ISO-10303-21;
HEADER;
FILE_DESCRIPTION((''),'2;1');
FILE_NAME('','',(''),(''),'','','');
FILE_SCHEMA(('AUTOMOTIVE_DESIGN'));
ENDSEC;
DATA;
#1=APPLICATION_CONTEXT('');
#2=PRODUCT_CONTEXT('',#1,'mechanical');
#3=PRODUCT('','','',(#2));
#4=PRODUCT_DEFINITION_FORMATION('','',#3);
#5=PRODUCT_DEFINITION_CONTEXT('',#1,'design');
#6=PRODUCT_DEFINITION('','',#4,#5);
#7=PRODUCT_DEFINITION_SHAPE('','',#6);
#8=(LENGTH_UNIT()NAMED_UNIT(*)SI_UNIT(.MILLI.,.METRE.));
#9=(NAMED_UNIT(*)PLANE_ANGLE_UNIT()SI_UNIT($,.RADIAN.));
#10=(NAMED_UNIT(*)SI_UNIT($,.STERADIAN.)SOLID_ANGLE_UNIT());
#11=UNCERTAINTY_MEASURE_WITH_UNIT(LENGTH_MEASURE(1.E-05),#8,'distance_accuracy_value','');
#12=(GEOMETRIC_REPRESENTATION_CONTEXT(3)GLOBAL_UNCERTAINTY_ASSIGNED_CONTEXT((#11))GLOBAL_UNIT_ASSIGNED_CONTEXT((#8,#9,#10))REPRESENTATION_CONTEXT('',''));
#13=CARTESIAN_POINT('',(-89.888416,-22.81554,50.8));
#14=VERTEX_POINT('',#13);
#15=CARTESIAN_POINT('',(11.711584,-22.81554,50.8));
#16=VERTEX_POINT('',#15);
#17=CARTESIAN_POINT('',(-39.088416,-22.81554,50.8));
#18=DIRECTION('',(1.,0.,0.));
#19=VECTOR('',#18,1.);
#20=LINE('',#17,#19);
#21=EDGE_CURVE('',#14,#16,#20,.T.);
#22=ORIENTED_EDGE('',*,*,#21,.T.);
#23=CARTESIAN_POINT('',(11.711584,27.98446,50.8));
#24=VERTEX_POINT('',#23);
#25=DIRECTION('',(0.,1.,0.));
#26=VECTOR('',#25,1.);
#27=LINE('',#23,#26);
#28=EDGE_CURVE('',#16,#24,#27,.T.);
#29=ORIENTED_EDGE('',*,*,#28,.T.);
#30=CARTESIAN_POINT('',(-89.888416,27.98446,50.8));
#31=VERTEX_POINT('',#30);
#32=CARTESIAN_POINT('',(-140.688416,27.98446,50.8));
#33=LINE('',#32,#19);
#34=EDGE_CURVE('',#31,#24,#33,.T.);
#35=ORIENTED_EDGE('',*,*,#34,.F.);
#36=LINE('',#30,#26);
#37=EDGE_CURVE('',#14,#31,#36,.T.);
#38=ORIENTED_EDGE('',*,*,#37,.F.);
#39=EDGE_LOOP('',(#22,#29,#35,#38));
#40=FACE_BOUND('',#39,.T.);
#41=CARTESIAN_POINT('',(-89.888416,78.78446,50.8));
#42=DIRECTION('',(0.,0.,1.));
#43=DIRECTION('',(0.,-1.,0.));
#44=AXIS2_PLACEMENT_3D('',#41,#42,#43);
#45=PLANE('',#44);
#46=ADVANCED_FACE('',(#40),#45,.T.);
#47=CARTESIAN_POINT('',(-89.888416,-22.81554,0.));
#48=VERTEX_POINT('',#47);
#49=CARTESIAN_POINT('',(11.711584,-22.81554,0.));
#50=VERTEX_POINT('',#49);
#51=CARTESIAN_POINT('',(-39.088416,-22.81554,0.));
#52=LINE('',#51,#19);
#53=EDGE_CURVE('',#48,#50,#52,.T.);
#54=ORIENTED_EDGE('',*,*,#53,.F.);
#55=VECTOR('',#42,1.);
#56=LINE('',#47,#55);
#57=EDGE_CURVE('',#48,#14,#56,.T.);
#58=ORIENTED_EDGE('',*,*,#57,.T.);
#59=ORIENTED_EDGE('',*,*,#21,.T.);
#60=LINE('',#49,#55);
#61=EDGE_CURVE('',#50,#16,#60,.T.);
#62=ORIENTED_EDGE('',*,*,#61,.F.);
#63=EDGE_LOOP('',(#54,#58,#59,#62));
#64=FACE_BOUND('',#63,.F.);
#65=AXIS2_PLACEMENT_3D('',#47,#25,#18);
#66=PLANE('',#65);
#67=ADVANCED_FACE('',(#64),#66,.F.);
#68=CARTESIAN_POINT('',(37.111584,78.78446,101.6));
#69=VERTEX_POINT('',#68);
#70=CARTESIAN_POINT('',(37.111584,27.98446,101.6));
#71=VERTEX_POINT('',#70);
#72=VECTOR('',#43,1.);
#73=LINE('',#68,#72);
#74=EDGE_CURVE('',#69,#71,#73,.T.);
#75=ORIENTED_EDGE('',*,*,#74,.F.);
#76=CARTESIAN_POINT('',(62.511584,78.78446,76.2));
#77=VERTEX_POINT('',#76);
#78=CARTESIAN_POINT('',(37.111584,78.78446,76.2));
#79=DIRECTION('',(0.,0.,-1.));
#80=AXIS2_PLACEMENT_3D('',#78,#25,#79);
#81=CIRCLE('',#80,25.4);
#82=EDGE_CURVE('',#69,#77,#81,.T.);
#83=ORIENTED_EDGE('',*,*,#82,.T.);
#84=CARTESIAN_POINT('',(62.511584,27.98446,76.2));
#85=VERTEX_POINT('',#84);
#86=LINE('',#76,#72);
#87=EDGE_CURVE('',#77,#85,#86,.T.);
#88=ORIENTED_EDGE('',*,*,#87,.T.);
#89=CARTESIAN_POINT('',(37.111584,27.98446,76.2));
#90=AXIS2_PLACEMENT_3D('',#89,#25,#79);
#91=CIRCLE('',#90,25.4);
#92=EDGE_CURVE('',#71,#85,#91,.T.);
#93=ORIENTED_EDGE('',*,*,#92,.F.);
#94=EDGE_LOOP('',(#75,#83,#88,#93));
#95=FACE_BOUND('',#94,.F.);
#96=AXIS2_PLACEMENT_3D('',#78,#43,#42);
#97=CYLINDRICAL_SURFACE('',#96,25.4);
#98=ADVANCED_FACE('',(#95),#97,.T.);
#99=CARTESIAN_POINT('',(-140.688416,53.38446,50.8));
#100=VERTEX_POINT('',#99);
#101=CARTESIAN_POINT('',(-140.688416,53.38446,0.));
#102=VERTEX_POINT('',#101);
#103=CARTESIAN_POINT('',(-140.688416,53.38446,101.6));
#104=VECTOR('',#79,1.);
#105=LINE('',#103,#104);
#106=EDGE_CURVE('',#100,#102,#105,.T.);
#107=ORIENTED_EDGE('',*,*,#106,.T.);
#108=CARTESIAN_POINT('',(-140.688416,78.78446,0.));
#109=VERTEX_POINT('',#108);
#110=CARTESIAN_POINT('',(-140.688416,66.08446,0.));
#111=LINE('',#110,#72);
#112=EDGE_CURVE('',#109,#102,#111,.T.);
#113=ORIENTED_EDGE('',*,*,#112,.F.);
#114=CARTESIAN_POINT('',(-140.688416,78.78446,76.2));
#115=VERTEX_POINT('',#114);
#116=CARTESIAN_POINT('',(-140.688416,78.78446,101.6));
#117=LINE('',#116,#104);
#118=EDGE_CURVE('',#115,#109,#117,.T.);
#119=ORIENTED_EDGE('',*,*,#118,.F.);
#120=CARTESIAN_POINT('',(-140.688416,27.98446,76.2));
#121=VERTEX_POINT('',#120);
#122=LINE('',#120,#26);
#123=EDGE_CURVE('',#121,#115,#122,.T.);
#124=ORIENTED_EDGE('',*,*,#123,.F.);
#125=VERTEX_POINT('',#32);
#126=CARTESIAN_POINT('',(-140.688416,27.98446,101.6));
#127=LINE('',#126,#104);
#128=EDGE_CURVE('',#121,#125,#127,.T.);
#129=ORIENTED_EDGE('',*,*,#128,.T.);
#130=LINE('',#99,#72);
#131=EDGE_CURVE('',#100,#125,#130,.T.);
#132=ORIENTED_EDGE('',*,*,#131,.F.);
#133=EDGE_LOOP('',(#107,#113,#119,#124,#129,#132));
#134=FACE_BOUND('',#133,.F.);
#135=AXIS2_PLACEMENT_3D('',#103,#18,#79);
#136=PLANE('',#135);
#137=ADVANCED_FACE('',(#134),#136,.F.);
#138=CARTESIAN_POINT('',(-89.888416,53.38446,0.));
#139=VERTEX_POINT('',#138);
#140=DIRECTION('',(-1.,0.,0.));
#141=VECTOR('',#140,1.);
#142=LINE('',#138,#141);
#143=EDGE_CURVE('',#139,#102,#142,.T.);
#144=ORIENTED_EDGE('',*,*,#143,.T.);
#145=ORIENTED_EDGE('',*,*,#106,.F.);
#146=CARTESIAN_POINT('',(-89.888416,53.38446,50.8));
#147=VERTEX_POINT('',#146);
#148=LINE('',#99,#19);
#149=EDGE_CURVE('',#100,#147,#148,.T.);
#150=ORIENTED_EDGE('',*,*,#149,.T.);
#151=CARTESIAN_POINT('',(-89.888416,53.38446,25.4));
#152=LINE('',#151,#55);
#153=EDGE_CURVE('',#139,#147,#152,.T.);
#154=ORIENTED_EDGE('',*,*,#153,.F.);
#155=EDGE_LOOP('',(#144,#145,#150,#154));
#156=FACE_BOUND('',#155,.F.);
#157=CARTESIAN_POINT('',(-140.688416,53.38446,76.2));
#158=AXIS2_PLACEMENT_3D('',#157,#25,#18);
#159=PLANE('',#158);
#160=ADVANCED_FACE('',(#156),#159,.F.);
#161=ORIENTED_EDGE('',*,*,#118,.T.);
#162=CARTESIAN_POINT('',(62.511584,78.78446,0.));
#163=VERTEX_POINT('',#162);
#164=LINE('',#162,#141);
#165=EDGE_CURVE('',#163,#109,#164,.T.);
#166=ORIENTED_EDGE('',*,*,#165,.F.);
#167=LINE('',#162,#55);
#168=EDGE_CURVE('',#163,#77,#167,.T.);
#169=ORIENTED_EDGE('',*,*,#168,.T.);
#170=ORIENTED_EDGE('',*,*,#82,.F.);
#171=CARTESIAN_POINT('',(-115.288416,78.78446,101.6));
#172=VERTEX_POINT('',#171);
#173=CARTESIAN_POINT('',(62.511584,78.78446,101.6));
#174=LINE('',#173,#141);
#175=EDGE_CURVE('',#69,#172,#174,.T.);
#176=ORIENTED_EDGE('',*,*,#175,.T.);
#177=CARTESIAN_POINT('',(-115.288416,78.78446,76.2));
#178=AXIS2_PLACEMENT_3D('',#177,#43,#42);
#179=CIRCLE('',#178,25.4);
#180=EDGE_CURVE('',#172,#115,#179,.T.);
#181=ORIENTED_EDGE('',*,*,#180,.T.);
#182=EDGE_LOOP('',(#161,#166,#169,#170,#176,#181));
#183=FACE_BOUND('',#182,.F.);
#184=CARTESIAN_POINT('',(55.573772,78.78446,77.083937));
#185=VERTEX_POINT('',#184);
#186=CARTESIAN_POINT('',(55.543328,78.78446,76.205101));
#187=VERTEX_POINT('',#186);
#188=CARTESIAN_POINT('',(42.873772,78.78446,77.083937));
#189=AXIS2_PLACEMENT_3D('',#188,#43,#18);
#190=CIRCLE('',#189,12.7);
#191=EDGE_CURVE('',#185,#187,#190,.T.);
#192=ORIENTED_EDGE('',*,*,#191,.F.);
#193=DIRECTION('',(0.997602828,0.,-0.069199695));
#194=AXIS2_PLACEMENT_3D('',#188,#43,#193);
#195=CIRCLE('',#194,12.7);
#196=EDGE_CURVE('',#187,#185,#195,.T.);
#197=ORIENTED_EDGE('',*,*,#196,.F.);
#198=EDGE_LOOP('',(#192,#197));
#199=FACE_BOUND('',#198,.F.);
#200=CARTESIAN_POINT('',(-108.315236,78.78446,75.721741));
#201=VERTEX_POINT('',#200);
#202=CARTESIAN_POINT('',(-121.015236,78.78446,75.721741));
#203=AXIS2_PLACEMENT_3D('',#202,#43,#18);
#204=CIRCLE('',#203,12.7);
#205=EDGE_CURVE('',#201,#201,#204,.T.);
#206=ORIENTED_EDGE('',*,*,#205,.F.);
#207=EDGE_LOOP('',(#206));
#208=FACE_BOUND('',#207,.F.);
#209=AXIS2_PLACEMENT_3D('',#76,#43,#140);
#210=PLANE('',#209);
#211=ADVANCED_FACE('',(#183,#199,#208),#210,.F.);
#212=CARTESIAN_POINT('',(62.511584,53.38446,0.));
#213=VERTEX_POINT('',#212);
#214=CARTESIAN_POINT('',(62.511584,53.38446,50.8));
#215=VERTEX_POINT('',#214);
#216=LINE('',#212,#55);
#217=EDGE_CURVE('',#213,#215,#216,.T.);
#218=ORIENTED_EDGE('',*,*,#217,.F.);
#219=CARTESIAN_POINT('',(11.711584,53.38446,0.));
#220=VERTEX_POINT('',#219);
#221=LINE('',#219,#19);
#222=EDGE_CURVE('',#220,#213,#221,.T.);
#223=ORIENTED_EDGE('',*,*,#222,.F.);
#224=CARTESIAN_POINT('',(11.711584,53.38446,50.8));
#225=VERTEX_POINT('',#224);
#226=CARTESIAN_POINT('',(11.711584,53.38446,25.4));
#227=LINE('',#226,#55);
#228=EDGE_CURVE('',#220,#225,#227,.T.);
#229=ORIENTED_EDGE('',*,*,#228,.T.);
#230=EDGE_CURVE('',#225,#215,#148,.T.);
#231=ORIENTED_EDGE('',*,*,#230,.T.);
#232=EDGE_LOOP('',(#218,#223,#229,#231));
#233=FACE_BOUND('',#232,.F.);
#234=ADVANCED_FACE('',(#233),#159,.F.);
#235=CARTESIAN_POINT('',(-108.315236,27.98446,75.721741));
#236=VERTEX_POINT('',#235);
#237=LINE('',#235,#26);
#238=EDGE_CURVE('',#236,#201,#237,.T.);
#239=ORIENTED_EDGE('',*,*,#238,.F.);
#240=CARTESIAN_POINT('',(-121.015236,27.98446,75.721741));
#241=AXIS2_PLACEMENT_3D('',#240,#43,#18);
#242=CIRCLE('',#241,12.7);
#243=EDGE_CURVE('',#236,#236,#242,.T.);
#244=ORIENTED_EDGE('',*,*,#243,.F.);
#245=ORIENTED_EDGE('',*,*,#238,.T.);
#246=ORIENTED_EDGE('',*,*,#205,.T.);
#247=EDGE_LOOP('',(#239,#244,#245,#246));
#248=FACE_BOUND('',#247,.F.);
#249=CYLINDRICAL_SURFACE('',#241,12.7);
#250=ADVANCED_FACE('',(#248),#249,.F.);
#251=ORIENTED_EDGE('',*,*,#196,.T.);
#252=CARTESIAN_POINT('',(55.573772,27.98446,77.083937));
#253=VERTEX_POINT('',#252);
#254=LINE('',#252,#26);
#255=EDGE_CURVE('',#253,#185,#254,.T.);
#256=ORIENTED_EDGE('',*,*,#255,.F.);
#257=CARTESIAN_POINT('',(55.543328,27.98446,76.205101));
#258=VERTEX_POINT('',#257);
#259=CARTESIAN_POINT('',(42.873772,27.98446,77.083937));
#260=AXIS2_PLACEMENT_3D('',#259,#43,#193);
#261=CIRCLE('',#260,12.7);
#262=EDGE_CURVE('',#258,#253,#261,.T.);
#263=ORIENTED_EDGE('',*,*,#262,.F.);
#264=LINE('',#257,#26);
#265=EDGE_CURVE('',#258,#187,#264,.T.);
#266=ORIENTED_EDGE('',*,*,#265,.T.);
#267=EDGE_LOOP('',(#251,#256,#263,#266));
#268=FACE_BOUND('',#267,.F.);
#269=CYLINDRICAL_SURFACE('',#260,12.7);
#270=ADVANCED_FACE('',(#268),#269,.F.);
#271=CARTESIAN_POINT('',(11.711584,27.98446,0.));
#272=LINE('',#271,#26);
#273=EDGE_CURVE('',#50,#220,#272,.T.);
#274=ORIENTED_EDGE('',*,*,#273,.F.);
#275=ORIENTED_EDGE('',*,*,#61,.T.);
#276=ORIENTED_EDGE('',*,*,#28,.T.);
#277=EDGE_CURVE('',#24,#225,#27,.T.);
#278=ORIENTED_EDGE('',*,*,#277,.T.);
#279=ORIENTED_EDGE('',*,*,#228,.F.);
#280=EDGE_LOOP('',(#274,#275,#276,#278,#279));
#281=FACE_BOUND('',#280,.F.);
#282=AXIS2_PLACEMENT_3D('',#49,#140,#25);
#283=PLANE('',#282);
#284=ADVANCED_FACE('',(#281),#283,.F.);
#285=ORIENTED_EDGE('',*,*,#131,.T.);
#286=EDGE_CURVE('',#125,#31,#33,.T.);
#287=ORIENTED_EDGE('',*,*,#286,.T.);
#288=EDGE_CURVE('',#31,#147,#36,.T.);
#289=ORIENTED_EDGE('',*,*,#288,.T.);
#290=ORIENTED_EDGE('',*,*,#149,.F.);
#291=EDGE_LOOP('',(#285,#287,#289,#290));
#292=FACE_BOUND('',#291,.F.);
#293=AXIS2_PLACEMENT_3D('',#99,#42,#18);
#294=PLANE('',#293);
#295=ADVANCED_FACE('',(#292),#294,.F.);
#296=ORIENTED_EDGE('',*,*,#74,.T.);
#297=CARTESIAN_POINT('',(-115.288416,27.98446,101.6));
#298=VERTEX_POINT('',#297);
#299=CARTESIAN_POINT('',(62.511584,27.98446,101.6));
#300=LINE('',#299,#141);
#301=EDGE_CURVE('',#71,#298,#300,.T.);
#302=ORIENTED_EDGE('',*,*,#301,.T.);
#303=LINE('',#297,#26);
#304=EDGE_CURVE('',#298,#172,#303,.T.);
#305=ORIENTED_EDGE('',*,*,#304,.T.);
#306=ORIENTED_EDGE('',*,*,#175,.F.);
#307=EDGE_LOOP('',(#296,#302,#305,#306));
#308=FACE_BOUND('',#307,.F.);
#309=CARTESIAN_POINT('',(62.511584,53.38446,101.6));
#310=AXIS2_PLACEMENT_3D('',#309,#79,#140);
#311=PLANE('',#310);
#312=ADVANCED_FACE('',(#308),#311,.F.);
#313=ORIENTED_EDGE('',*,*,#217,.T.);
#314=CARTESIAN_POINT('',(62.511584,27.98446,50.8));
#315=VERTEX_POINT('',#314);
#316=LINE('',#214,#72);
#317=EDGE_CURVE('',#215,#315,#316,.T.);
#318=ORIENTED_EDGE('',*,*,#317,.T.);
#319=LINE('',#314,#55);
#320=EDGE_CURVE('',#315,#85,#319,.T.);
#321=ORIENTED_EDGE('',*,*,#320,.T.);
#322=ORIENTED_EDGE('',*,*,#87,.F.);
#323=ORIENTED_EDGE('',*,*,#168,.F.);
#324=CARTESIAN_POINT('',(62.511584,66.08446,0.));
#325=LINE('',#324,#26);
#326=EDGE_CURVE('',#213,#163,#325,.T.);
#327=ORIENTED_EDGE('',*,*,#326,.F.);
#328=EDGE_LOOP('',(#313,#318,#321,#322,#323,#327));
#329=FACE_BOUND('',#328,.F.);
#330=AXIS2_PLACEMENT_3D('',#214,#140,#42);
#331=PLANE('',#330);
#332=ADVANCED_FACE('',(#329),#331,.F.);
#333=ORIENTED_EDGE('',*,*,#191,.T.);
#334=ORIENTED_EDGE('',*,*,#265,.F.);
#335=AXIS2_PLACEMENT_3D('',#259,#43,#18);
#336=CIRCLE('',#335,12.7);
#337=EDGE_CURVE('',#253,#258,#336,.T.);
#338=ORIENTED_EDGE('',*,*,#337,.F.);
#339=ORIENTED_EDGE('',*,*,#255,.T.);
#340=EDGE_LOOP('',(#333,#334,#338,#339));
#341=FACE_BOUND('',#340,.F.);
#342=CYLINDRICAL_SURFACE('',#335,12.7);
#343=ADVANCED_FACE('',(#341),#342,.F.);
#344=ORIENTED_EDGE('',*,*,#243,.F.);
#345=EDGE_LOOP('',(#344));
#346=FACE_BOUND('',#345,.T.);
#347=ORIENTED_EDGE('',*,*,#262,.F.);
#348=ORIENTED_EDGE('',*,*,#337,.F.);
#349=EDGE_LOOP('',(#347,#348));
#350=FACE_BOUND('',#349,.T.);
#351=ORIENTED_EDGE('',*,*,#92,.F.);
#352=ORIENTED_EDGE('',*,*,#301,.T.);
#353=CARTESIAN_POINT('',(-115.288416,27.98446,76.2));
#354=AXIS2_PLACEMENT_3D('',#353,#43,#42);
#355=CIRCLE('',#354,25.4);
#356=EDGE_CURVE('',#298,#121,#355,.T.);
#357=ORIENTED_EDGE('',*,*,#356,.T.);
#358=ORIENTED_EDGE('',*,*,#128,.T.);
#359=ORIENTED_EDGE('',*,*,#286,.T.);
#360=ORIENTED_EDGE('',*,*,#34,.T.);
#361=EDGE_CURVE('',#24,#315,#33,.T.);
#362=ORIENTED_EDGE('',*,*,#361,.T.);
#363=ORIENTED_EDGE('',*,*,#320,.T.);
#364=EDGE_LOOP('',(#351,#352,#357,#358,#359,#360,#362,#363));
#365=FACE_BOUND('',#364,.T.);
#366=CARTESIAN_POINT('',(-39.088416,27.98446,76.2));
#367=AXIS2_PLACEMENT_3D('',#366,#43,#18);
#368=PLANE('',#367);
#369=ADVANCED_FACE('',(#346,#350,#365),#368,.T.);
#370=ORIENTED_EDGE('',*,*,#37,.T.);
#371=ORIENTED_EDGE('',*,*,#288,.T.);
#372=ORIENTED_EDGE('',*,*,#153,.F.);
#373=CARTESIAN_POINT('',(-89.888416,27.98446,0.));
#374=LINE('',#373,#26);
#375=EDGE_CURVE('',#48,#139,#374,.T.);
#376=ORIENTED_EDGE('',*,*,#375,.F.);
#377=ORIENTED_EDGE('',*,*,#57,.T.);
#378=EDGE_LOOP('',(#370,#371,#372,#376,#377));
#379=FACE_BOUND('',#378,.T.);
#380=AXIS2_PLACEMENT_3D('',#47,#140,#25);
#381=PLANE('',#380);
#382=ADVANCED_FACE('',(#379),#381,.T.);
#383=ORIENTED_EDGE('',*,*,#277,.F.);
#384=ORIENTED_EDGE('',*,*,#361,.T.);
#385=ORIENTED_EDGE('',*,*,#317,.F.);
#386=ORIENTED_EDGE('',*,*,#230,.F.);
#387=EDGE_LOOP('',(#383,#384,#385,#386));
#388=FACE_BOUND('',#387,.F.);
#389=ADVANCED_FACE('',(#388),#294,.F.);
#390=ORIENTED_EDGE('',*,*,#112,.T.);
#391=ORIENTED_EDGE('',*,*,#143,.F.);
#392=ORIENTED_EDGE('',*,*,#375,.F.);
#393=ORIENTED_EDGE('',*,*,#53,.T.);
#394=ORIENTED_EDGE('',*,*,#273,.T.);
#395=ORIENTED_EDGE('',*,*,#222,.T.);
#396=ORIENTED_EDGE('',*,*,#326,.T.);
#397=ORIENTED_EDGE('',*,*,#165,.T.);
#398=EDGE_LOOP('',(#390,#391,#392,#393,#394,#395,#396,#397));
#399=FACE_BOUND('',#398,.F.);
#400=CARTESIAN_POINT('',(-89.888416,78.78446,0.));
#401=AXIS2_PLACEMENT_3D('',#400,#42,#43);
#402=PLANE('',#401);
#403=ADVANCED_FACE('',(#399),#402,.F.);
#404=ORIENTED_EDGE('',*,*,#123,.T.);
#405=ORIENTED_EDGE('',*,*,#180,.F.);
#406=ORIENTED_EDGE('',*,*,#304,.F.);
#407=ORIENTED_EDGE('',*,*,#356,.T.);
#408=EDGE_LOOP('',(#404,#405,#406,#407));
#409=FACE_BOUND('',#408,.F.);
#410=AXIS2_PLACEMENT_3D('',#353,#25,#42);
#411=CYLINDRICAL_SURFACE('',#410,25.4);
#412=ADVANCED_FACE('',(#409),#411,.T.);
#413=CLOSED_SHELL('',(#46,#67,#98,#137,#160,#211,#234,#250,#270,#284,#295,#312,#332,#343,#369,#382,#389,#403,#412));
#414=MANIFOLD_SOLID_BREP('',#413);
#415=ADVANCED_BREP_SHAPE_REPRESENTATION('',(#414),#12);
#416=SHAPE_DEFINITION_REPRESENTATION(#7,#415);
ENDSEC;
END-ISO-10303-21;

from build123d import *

# Parameters (mm, degrees)
F0_W      = 101.6
F0_H      = 101.6
F1_DEPTH  = 50.8
F2_W      = 25.4
F2_H      = 50.8
F3_DEPTH  = 50.8
F4_W      = 25.4
F4_H      = 50.8
F5_DEPTH  = 50.8
F7_DEPTH  = 25.4
F8_DEPTH  = 25.4
F10_DEPTH = 25.4
F11_R     = 12.7
F12_DEPTH = 50.8
F14_DEPTH = 50.8
F15_R     = 25.4
F16_R     = 25.4


with BuildPart() as f1:
    # F0 (on Top) → F1 (new body)
    with BuildSketch(Plane.XY):
        with Locations((-39.0884162307, 27.9844595671)):
            Rectangle(F0_W, F0_H)
    extrude(amount=F1_DEPTH)

    # F2 (on face) → F3 (join)
    with BuildSketch(Plane.YZ.offset(11.7115837693)):
        with Locations((66.0844595671, 25.4)):
            Rectangle(F2_W, F2_H)
    extrude(amount=F3_DEPTH)

    # F4 (on face) → F5 (join)
    with BuildSketch(Plane(origin=(-89.8884162307, 0, 0), x_dir=(0, -1, 0), z_dir=(-1, 0, 0))):
        with Locations((-66.0844595671, 25.4)):
            Rectangle(F4_W, F4_H)
    extrude(amount=F5_DEPTH)

    # F6 (on face) → F7 (join)
    with BuildSketch(Plane.XY.offset(50.8)):
        Polygon((-140.6884162307, 53.3844595671), (-89.8884162307, 53.3844595671), (11.7115837693, 53.3844595671), (62.5115837693, 53.3844595671), (62.5115837693, 78.7844595671), (-140.6884162307, 78.7844595671), align=None)
    extrude(amount=F7_DEPTH)

    # F8 (add): a face of the model
    f8_faces = [f1.faces().sort_by_distance(p)[0] for p in [
        (-39.0884162307, 66.0844595671, 76.2),
    ]]
    extrude(f8_faces, amount=F8_DEPTH)

    # F9 (on face) → F10 (join)
    with BuildSketch(Plane.XZ.offset(-53.3844595671)):
        Polygon((-140.6884162307, 50.8), (-89.8884162307, 50.8), (11.7115837693, 50.8), (62.5115837693, 50.8), (62.5115837693, 101.6), (-140.6884162307, 101.6), align=None)
    extrude(amount=F10_DEPTH)

    # F11 (on face) → F12 (cut)
    with BuildSketch(Plane.XZ.offset(-27.9844595671)):
        with Locations((-121.0152357817, 75.7217407227)):
            Circle(F11_R)
    extrude(amount=-F12_DEPTH, mode=Mode.SUBTRACT)

    # F13 (on face) → F14 (cut)
    with BuildSketch(Plane.XZ.offset(-27.9844595671)):
        with BuildLine():
            ThreePointArc((55.5737721028, 77.0839367255), (30.1813854063, 77.523618368), (55.5433280167, 76.2051005946))
            ThreePointArc((55.5433280167, 76.2051005946), (55.5661587993, 76.6442550829), (55.5737721028, 77.0839367255))
        make_face()
    extrude(amount=-F14_DEPTH, mode=Mode.SUBTRACT)

    # F15
    f15_edges = [f1.edges().sort_by_distance(p)[0] for p in [
        (62.511584, 53.38446, 101.6),
    ]]
    fillet(f15_edges, radius=F15_R)

    # F16
    f16_edges = [f1.edges().sort_by_distance(p)[0] for p in [
        (-140.688416, 53.38446, 101.6),
    ]]
    fillet(f16_edges, radius=F16_R)


solid = f1.part
